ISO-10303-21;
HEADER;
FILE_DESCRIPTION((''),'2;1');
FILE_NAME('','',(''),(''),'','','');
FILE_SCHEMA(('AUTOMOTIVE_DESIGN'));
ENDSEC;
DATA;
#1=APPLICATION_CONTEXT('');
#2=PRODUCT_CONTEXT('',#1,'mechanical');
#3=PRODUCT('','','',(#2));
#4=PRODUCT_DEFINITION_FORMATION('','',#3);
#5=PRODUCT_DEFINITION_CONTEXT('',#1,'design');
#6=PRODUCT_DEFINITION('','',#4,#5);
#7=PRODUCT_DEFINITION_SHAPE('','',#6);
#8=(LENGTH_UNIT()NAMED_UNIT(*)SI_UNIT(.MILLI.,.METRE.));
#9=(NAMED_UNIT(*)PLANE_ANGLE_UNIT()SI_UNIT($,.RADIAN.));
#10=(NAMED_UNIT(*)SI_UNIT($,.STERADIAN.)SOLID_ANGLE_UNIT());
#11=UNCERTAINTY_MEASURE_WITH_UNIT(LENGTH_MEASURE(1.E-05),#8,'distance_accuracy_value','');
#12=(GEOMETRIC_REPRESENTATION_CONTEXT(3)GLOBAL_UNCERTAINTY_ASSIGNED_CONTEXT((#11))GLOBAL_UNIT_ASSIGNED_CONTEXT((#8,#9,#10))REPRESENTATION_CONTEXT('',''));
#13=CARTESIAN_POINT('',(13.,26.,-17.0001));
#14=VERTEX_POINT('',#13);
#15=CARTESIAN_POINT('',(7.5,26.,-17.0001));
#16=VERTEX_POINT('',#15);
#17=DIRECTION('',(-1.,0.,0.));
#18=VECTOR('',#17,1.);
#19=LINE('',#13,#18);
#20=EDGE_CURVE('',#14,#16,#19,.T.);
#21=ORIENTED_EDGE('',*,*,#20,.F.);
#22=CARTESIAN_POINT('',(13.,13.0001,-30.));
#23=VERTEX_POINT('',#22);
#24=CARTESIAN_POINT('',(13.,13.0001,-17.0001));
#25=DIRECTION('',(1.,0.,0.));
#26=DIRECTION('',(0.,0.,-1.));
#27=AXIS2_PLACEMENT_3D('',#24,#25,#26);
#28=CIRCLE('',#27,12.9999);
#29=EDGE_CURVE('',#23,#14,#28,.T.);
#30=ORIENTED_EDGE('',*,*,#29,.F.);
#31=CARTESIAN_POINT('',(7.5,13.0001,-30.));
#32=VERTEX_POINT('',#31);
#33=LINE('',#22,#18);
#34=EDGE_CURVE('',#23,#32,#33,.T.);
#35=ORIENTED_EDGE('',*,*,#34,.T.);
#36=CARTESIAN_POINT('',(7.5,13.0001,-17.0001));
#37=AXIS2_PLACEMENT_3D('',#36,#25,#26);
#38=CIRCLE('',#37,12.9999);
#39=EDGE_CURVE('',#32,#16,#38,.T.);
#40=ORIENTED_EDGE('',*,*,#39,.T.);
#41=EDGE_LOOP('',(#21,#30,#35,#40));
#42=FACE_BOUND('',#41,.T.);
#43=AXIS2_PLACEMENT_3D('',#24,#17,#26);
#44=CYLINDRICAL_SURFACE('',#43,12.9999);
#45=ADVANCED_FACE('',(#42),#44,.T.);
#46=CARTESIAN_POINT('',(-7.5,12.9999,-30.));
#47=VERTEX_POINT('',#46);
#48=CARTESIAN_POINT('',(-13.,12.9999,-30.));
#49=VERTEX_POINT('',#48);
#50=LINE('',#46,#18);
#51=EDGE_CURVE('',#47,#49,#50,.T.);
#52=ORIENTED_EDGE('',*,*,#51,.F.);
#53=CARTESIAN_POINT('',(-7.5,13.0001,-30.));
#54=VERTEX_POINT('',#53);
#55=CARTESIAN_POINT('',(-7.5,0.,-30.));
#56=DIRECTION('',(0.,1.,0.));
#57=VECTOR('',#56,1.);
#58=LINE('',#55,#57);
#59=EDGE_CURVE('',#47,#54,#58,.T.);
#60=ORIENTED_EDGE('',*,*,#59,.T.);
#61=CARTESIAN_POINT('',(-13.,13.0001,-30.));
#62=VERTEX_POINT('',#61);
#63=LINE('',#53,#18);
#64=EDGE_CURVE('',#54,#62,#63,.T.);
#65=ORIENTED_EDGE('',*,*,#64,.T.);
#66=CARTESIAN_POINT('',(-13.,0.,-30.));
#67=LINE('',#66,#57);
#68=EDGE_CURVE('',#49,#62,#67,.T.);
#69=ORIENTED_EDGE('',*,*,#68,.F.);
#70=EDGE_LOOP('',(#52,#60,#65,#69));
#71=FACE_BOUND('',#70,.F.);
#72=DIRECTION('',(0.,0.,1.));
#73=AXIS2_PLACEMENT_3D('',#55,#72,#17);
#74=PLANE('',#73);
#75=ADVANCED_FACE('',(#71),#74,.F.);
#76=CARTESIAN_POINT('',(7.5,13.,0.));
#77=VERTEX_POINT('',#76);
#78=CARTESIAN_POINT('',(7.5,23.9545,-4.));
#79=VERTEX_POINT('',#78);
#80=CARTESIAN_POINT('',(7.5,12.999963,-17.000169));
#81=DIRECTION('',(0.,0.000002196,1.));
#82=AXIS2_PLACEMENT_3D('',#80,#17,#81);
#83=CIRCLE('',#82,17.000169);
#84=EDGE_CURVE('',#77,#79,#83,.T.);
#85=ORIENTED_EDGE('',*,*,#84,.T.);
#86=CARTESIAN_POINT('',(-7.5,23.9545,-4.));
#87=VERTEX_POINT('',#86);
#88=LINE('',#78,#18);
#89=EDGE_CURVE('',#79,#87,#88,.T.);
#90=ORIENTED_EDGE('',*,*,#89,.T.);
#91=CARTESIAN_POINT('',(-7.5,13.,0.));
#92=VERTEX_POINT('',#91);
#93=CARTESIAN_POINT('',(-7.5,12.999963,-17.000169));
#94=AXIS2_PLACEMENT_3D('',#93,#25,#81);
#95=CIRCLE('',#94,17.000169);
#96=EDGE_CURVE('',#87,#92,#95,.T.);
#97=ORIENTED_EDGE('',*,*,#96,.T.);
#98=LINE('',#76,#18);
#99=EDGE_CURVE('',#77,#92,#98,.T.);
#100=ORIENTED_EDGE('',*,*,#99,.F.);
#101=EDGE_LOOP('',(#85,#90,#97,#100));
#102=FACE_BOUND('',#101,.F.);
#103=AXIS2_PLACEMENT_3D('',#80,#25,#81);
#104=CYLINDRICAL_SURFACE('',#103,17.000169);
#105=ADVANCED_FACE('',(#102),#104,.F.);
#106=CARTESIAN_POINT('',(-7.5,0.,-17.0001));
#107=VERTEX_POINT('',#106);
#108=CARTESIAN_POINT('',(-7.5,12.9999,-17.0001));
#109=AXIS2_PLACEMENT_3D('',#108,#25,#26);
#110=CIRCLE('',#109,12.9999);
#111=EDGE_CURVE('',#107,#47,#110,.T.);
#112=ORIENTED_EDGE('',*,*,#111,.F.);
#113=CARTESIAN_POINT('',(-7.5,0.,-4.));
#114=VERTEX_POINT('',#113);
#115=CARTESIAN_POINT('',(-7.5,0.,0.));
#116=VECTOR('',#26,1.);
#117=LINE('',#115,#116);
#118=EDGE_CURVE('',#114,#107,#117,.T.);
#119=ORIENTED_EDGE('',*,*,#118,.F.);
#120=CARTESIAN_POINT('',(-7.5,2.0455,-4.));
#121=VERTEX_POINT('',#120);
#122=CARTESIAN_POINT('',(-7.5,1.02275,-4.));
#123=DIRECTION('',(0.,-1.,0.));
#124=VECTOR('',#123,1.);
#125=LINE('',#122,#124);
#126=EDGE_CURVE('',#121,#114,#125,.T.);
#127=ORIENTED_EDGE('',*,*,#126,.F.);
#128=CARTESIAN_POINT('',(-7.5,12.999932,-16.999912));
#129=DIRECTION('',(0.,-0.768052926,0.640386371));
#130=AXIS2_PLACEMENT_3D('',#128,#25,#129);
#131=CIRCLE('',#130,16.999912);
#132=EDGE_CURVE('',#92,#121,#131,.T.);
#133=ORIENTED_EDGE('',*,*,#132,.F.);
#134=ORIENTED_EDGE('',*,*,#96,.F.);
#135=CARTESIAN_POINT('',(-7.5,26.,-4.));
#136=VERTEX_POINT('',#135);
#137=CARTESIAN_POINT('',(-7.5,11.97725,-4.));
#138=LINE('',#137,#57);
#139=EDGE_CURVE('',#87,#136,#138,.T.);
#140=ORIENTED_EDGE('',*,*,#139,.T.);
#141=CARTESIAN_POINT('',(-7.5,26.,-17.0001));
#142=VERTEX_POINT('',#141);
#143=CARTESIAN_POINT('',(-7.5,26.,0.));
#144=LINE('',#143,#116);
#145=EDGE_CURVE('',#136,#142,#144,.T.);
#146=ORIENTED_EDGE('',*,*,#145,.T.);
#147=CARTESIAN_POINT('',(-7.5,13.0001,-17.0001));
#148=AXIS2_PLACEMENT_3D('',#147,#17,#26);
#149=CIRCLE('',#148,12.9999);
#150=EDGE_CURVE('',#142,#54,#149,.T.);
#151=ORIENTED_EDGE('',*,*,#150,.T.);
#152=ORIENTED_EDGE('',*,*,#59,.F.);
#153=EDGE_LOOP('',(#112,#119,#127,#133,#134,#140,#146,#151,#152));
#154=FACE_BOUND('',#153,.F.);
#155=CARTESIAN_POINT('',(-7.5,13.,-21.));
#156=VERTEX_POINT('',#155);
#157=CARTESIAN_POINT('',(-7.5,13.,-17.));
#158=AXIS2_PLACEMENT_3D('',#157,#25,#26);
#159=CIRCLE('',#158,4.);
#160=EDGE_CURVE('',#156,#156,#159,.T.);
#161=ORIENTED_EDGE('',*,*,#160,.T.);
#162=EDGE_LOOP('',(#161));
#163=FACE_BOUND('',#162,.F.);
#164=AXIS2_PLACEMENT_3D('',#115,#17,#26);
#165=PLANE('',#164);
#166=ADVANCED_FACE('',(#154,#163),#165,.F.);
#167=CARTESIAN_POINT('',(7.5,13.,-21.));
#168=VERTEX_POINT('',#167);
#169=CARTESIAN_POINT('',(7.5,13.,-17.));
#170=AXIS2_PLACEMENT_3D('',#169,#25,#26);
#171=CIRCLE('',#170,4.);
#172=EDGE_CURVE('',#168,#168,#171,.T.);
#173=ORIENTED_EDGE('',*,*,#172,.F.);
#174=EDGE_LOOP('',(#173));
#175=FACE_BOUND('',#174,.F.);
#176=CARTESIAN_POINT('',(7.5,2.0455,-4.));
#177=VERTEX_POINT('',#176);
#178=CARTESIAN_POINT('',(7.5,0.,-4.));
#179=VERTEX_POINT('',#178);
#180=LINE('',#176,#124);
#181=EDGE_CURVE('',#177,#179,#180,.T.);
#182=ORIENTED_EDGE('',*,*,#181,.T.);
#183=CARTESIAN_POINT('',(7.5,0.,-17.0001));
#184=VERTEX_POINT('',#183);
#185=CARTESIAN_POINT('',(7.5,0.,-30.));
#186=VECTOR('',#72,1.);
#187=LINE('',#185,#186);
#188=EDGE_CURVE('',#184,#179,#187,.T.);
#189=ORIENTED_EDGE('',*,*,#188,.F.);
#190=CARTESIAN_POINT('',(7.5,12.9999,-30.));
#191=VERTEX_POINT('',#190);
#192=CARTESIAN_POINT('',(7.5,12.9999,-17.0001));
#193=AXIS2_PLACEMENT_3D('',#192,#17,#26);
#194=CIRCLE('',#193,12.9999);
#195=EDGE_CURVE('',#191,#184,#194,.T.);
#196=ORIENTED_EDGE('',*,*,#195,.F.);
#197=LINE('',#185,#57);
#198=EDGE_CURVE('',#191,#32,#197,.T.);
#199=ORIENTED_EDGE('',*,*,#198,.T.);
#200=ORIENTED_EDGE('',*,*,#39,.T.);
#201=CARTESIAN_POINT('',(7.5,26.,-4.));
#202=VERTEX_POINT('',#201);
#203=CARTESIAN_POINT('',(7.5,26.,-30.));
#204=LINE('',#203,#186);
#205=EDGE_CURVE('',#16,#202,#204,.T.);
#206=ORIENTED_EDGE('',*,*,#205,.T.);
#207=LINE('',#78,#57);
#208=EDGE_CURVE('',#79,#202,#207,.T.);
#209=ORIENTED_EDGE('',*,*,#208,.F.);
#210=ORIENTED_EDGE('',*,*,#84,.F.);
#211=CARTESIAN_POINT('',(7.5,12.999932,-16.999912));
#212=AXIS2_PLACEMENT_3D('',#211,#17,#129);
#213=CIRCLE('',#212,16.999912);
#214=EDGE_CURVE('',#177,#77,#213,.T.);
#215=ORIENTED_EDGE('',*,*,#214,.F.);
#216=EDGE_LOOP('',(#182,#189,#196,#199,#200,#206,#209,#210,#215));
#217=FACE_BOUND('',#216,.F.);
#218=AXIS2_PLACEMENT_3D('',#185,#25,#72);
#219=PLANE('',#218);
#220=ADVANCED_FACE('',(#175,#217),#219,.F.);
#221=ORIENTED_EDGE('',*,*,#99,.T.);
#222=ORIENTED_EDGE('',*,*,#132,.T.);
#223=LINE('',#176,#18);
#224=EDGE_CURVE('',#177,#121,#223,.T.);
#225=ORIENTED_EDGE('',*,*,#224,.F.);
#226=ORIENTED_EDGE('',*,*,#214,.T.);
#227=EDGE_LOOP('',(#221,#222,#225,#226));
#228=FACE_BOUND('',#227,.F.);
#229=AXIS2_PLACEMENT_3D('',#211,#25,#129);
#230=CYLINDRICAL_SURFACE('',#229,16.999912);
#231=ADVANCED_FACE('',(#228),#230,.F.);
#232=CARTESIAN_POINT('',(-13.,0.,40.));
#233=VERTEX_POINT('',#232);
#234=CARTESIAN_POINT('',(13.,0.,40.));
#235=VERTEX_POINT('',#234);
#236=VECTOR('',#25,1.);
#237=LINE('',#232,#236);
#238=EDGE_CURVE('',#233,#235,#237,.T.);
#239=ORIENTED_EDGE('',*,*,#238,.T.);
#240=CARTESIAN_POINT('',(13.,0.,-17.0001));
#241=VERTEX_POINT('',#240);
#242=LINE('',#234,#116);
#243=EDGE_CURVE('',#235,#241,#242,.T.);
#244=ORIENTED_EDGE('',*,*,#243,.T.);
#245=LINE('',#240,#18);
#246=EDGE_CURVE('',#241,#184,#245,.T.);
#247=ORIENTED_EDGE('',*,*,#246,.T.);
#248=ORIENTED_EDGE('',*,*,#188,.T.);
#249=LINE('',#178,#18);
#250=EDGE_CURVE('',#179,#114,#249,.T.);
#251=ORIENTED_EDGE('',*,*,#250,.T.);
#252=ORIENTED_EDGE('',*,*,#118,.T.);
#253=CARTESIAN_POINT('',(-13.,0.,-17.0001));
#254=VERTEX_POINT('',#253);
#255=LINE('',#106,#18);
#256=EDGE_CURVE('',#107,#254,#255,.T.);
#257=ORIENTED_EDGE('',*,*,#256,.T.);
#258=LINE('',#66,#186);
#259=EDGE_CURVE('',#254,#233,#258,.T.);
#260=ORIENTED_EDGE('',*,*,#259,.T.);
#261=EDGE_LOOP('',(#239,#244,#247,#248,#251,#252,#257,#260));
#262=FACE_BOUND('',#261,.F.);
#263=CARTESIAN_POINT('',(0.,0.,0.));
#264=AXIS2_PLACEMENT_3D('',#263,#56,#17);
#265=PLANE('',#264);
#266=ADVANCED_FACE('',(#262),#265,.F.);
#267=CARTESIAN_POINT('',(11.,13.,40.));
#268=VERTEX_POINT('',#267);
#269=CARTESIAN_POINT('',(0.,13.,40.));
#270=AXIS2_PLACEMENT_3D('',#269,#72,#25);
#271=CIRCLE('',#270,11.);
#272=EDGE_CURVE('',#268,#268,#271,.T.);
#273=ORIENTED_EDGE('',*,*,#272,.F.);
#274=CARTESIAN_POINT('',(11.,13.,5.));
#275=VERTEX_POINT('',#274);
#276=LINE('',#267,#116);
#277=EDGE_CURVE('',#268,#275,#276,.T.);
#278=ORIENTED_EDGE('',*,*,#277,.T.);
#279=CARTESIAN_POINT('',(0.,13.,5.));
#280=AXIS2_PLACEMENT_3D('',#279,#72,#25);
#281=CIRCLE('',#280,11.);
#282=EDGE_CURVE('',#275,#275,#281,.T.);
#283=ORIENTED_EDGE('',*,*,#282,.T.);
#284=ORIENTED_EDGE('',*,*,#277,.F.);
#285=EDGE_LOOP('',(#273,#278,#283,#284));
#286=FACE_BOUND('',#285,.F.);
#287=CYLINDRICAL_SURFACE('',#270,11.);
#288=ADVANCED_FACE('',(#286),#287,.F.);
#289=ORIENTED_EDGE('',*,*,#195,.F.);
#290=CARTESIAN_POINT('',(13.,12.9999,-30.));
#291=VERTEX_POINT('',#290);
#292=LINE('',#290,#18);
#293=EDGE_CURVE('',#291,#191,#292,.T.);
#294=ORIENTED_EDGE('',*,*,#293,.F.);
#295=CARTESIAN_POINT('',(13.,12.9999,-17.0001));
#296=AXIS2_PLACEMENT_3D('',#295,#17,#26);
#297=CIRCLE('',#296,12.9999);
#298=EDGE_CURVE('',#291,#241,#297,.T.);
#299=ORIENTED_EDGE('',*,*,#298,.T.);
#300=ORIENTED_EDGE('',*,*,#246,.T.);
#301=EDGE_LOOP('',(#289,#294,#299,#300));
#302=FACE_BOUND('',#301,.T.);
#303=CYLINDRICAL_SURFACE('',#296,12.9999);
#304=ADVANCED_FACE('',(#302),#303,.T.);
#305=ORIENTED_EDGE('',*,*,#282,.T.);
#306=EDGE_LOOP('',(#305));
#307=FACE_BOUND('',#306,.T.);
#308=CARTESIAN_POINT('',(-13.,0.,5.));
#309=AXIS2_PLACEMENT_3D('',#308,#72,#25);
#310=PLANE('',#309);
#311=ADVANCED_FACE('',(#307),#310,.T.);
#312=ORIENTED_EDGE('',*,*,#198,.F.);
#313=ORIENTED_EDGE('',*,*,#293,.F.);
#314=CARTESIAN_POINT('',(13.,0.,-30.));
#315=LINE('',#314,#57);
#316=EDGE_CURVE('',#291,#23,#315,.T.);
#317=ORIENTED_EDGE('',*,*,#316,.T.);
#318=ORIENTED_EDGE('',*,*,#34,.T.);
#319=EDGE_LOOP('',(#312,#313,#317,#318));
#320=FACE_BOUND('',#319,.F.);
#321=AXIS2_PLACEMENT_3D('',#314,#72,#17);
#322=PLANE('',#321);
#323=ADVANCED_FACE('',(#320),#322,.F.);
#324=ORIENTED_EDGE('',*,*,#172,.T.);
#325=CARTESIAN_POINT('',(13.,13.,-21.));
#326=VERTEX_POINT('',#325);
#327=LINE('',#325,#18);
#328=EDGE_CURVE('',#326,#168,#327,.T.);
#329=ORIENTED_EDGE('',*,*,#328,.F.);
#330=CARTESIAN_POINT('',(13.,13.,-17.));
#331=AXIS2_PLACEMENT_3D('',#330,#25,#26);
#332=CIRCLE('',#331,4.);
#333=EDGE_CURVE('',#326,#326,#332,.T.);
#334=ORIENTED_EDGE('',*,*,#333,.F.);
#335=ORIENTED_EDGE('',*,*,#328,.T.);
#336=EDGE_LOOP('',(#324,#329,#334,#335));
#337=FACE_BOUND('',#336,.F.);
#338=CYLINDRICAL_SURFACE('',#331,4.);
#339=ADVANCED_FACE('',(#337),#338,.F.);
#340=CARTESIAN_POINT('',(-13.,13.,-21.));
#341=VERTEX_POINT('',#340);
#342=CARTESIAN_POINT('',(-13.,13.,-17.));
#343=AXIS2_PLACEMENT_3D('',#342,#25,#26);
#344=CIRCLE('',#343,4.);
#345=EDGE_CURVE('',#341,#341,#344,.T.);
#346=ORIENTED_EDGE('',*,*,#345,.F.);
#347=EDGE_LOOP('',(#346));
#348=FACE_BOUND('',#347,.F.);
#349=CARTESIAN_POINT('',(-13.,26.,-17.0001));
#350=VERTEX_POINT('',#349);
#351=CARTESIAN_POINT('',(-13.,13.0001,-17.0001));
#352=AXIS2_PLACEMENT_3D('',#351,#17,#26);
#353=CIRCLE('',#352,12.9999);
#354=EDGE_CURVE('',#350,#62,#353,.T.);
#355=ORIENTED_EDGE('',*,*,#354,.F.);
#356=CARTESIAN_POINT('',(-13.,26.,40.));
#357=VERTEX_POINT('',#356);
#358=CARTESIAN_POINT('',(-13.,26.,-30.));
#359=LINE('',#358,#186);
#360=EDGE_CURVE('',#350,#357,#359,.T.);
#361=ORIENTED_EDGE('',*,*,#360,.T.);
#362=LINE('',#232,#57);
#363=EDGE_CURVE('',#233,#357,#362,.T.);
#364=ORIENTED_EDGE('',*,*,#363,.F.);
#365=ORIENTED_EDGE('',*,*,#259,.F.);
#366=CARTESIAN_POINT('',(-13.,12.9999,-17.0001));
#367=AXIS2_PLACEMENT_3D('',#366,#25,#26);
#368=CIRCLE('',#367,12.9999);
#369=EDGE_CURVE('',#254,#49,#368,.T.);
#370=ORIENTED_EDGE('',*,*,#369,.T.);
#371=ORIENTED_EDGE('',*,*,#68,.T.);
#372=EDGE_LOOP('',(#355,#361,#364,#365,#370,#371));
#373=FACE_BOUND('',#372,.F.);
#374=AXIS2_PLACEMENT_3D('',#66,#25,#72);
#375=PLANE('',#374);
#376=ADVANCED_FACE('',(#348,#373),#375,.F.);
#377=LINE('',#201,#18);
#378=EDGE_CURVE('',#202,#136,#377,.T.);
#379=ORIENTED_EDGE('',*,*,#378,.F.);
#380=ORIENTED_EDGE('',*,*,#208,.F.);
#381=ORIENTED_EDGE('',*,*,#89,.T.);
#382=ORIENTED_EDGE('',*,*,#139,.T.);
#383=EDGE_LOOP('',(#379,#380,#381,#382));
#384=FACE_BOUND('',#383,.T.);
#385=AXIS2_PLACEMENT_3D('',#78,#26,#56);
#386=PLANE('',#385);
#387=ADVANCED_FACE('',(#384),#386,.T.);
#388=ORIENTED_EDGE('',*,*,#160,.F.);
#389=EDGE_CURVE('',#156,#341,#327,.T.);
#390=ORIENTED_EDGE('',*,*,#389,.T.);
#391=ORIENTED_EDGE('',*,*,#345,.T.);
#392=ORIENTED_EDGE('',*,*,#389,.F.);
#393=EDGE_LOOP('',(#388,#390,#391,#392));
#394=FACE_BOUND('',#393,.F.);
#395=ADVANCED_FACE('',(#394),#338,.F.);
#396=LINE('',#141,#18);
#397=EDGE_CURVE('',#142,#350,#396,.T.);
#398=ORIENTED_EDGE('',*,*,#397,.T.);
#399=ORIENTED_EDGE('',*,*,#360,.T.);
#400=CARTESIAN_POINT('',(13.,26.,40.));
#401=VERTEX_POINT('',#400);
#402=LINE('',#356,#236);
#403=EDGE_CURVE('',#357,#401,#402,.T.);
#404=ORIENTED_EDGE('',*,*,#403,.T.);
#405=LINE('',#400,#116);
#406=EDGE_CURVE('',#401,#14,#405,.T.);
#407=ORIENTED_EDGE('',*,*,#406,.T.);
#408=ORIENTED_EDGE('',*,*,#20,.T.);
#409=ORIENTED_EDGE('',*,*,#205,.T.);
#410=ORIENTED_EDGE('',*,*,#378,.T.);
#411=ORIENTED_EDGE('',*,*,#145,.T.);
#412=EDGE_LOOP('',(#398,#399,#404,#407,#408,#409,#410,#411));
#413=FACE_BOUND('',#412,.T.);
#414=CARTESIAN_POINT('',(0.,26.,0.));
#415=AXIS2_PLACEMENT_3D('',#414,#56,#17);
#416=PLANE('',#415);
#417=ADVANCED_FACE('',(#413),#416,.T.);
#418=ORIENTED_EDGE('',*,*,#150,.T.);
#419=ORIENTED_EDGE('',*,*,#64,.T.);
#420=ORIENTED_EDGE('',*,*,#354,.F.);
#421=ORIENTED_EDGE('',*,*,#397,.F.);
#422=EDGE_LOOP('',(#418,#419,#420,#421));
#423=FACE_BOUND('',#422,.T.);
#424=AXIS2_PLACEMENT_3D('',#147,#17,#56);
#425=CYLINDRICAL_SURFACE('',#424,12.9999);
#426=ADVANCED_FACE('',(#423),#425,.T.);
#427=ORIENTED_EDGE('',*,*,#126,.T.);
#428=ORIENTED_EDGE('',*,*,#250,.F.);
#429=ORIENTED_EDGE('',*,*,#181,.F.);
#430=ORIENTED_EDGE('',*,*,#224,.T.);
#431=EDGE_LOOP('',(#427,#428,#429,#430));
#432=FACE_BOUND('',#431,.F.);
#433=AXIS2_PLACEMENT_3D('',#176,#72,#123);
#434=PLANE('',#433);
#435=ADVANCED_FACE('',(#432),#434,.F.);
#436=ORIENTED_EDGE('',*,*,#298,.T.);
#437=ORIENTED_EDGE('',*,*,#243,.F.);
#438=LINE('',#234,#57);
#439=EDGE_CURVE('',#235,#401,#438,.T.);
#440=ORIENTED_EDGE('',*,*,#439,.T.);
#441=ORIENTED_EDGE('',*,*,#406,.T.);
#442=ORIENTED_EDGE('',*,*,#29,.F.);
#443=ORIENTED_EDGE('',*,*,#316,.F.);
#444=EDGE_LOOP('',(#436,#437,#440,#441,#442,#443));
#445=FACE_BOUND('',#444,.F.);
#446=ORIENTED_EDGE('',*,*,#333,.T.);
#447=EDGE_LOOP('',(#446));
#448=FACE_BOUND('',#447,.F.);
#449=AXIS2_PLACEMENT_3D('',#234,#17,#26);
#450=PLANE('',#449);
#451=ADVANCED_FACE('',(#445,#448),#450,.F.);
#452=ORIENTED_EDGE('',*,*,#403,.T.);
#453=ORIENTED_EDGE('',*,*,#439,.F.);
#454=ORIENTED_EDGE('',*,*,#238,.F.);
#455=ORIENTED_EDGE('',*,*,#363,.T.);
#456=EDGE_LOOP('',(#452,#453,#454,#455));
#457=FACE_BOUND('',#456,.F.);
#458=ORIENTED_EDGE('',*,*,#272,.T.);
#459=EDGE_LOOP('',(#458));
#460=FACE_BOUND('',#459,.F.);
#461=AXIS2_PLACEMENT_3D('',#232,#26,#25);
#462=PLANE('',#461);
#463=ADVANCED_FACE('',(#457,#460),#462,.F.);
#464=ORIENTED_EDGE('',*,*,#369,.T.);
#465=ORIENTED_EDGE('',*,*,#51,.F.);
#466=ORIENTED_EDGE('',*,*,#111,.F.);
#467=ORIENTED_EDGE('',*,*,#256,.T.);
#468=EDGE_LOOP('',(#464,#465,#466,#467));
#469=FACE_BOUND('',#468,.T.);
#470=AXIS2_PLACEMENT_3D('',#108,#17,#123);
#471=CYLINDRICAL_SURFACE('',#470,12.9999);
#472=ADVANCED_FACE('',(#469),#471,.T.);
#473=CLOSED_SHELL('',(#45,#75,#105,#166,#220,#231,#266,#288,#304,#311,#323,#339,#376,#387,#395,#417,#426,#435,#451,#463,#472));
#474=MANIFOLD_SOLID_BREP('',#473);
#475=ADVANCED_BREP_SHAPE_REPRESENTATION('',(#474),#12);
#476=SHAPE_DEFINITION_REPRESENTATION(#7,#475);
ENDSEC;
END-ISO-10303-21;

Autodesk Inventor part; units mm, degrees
ref_plane "YZ Plane" through (0, 0, 0) normal (1, 0, 0) x (0, 1, 0)
ref_plane "XZ Plane" through (0, 0, 0) normal (0, 1, 0) x (-1, 0, 0)
ref_plane "XY Plane" through (0, 0, 0) normal (0, 0, 1) x (1, 0, 0)
sketch "Sketch1" plane through (0, 0, 0) normal (0, 1, 0) x (-1, 0, 0)
  line L0 (-7.5, 0) -> (7.5, 0)
  line L1 (7.5, 0) -> (7.5, -30)
  line L2 (7.5, -30) -> (13, -30)
  line L3 (13, -30) -> (13, 40)
  line L4 (13, 40) -> (-13, 40)
  line L5 (-13, 40) -> (-13, -30)
  line L6 (-13, -30) -> (-7.5, -30)
  line L7 (-7.5, -30) -> (-7.5, 0)
  line L8 (0, 0) -> (0, 40) construction
  line L9 (-11, 8) -> (11, 8) construction
  point P0 (0, 8)
  dimension "d0" = 22
  dimension "d1" = 30
  dimension "d2" = 15
  dimension "d3" = 8
  dimension "d8" = 26
  dimension "d9" = 40
extrude "Extrusion1" add sketch "Sketch1" along normal blind 26
sketch "Sketch2" plane through (13, 0, 40) normal (1, 0, 0) x (0, 0, -1)
  line L0 (70, 0) -> (70, 26) projected
  circle A0 centre (57, 13) radius 4
  point P0 (40, 0)
  point P1 (70, 13)
  dimension "d10" = 8
  dimension "d11" = 13
extrude "Extrusion2" cut sketch "Sketch2" against normal up to surface (26 mm away)
fillet "Fillet1" radius 13 4 edges at (-10.25, 26, -30) (10.25, 26, -30) (-10.25, 0, -30) (10.25, 0, -30)
sketch "Sketch3" plane through (-13, 0, 40) normal (0, 0, 1) x (1, 0, 0)
  line L0 (0, 0) -> (26, 0) projected
  line L1 (26, 0) -> (26, 26) projected
  circle A0 centre (13, 13) radius 11
  point P0 (13, 0)
  point P1 (26, 13)
  point P2 (13, 0)
  dimension "d15" = 22
extrude "Extrusion3" cut sketch "Sketch3" against normal blind 35
sketch "Sketch4" plane through (7.5, 0, 0) normal (-1, 0, 0) x (0, 0, 1)
  arc A0 (-17, 26) -> (-17, 0) centre (-17, 13) ccw projected
  line L0 (-17, 0) -> (0, 0) projected
  line L1 (0, 0) -> (0, 26) projected
  line L2 (-17, 26) -> (0, 26) projected
  arc A1 (0, 13) -> (-6.0455, 26) centre (-17, 13) ccw
  arc A2 (-6.1134, -0.0569) -> (0, 13) centre (-17, 13) ccw
  line L3 (-6.0455, 0) -> (0, 0)
  line L4 (0, 26) -> (-6.0455, 26)
  circle A3 centre (-17, 13) radius 4 projected
  circle A4 centre (-17, 13) radius 13 construction
  line L5 (-4, 23.9545) -> (-4, 2.0455) construction
  line L6 (-4, 23.9545) -> (-4, 26)
  line L7 (-4, 2.0455) -> (-4, 0)
extrude "Extrusion5" add sketch "Sketch4" along normal up to next contours L2 L1 A1 L6 | L7 A2 L1 L0
properties part number "spoke"
